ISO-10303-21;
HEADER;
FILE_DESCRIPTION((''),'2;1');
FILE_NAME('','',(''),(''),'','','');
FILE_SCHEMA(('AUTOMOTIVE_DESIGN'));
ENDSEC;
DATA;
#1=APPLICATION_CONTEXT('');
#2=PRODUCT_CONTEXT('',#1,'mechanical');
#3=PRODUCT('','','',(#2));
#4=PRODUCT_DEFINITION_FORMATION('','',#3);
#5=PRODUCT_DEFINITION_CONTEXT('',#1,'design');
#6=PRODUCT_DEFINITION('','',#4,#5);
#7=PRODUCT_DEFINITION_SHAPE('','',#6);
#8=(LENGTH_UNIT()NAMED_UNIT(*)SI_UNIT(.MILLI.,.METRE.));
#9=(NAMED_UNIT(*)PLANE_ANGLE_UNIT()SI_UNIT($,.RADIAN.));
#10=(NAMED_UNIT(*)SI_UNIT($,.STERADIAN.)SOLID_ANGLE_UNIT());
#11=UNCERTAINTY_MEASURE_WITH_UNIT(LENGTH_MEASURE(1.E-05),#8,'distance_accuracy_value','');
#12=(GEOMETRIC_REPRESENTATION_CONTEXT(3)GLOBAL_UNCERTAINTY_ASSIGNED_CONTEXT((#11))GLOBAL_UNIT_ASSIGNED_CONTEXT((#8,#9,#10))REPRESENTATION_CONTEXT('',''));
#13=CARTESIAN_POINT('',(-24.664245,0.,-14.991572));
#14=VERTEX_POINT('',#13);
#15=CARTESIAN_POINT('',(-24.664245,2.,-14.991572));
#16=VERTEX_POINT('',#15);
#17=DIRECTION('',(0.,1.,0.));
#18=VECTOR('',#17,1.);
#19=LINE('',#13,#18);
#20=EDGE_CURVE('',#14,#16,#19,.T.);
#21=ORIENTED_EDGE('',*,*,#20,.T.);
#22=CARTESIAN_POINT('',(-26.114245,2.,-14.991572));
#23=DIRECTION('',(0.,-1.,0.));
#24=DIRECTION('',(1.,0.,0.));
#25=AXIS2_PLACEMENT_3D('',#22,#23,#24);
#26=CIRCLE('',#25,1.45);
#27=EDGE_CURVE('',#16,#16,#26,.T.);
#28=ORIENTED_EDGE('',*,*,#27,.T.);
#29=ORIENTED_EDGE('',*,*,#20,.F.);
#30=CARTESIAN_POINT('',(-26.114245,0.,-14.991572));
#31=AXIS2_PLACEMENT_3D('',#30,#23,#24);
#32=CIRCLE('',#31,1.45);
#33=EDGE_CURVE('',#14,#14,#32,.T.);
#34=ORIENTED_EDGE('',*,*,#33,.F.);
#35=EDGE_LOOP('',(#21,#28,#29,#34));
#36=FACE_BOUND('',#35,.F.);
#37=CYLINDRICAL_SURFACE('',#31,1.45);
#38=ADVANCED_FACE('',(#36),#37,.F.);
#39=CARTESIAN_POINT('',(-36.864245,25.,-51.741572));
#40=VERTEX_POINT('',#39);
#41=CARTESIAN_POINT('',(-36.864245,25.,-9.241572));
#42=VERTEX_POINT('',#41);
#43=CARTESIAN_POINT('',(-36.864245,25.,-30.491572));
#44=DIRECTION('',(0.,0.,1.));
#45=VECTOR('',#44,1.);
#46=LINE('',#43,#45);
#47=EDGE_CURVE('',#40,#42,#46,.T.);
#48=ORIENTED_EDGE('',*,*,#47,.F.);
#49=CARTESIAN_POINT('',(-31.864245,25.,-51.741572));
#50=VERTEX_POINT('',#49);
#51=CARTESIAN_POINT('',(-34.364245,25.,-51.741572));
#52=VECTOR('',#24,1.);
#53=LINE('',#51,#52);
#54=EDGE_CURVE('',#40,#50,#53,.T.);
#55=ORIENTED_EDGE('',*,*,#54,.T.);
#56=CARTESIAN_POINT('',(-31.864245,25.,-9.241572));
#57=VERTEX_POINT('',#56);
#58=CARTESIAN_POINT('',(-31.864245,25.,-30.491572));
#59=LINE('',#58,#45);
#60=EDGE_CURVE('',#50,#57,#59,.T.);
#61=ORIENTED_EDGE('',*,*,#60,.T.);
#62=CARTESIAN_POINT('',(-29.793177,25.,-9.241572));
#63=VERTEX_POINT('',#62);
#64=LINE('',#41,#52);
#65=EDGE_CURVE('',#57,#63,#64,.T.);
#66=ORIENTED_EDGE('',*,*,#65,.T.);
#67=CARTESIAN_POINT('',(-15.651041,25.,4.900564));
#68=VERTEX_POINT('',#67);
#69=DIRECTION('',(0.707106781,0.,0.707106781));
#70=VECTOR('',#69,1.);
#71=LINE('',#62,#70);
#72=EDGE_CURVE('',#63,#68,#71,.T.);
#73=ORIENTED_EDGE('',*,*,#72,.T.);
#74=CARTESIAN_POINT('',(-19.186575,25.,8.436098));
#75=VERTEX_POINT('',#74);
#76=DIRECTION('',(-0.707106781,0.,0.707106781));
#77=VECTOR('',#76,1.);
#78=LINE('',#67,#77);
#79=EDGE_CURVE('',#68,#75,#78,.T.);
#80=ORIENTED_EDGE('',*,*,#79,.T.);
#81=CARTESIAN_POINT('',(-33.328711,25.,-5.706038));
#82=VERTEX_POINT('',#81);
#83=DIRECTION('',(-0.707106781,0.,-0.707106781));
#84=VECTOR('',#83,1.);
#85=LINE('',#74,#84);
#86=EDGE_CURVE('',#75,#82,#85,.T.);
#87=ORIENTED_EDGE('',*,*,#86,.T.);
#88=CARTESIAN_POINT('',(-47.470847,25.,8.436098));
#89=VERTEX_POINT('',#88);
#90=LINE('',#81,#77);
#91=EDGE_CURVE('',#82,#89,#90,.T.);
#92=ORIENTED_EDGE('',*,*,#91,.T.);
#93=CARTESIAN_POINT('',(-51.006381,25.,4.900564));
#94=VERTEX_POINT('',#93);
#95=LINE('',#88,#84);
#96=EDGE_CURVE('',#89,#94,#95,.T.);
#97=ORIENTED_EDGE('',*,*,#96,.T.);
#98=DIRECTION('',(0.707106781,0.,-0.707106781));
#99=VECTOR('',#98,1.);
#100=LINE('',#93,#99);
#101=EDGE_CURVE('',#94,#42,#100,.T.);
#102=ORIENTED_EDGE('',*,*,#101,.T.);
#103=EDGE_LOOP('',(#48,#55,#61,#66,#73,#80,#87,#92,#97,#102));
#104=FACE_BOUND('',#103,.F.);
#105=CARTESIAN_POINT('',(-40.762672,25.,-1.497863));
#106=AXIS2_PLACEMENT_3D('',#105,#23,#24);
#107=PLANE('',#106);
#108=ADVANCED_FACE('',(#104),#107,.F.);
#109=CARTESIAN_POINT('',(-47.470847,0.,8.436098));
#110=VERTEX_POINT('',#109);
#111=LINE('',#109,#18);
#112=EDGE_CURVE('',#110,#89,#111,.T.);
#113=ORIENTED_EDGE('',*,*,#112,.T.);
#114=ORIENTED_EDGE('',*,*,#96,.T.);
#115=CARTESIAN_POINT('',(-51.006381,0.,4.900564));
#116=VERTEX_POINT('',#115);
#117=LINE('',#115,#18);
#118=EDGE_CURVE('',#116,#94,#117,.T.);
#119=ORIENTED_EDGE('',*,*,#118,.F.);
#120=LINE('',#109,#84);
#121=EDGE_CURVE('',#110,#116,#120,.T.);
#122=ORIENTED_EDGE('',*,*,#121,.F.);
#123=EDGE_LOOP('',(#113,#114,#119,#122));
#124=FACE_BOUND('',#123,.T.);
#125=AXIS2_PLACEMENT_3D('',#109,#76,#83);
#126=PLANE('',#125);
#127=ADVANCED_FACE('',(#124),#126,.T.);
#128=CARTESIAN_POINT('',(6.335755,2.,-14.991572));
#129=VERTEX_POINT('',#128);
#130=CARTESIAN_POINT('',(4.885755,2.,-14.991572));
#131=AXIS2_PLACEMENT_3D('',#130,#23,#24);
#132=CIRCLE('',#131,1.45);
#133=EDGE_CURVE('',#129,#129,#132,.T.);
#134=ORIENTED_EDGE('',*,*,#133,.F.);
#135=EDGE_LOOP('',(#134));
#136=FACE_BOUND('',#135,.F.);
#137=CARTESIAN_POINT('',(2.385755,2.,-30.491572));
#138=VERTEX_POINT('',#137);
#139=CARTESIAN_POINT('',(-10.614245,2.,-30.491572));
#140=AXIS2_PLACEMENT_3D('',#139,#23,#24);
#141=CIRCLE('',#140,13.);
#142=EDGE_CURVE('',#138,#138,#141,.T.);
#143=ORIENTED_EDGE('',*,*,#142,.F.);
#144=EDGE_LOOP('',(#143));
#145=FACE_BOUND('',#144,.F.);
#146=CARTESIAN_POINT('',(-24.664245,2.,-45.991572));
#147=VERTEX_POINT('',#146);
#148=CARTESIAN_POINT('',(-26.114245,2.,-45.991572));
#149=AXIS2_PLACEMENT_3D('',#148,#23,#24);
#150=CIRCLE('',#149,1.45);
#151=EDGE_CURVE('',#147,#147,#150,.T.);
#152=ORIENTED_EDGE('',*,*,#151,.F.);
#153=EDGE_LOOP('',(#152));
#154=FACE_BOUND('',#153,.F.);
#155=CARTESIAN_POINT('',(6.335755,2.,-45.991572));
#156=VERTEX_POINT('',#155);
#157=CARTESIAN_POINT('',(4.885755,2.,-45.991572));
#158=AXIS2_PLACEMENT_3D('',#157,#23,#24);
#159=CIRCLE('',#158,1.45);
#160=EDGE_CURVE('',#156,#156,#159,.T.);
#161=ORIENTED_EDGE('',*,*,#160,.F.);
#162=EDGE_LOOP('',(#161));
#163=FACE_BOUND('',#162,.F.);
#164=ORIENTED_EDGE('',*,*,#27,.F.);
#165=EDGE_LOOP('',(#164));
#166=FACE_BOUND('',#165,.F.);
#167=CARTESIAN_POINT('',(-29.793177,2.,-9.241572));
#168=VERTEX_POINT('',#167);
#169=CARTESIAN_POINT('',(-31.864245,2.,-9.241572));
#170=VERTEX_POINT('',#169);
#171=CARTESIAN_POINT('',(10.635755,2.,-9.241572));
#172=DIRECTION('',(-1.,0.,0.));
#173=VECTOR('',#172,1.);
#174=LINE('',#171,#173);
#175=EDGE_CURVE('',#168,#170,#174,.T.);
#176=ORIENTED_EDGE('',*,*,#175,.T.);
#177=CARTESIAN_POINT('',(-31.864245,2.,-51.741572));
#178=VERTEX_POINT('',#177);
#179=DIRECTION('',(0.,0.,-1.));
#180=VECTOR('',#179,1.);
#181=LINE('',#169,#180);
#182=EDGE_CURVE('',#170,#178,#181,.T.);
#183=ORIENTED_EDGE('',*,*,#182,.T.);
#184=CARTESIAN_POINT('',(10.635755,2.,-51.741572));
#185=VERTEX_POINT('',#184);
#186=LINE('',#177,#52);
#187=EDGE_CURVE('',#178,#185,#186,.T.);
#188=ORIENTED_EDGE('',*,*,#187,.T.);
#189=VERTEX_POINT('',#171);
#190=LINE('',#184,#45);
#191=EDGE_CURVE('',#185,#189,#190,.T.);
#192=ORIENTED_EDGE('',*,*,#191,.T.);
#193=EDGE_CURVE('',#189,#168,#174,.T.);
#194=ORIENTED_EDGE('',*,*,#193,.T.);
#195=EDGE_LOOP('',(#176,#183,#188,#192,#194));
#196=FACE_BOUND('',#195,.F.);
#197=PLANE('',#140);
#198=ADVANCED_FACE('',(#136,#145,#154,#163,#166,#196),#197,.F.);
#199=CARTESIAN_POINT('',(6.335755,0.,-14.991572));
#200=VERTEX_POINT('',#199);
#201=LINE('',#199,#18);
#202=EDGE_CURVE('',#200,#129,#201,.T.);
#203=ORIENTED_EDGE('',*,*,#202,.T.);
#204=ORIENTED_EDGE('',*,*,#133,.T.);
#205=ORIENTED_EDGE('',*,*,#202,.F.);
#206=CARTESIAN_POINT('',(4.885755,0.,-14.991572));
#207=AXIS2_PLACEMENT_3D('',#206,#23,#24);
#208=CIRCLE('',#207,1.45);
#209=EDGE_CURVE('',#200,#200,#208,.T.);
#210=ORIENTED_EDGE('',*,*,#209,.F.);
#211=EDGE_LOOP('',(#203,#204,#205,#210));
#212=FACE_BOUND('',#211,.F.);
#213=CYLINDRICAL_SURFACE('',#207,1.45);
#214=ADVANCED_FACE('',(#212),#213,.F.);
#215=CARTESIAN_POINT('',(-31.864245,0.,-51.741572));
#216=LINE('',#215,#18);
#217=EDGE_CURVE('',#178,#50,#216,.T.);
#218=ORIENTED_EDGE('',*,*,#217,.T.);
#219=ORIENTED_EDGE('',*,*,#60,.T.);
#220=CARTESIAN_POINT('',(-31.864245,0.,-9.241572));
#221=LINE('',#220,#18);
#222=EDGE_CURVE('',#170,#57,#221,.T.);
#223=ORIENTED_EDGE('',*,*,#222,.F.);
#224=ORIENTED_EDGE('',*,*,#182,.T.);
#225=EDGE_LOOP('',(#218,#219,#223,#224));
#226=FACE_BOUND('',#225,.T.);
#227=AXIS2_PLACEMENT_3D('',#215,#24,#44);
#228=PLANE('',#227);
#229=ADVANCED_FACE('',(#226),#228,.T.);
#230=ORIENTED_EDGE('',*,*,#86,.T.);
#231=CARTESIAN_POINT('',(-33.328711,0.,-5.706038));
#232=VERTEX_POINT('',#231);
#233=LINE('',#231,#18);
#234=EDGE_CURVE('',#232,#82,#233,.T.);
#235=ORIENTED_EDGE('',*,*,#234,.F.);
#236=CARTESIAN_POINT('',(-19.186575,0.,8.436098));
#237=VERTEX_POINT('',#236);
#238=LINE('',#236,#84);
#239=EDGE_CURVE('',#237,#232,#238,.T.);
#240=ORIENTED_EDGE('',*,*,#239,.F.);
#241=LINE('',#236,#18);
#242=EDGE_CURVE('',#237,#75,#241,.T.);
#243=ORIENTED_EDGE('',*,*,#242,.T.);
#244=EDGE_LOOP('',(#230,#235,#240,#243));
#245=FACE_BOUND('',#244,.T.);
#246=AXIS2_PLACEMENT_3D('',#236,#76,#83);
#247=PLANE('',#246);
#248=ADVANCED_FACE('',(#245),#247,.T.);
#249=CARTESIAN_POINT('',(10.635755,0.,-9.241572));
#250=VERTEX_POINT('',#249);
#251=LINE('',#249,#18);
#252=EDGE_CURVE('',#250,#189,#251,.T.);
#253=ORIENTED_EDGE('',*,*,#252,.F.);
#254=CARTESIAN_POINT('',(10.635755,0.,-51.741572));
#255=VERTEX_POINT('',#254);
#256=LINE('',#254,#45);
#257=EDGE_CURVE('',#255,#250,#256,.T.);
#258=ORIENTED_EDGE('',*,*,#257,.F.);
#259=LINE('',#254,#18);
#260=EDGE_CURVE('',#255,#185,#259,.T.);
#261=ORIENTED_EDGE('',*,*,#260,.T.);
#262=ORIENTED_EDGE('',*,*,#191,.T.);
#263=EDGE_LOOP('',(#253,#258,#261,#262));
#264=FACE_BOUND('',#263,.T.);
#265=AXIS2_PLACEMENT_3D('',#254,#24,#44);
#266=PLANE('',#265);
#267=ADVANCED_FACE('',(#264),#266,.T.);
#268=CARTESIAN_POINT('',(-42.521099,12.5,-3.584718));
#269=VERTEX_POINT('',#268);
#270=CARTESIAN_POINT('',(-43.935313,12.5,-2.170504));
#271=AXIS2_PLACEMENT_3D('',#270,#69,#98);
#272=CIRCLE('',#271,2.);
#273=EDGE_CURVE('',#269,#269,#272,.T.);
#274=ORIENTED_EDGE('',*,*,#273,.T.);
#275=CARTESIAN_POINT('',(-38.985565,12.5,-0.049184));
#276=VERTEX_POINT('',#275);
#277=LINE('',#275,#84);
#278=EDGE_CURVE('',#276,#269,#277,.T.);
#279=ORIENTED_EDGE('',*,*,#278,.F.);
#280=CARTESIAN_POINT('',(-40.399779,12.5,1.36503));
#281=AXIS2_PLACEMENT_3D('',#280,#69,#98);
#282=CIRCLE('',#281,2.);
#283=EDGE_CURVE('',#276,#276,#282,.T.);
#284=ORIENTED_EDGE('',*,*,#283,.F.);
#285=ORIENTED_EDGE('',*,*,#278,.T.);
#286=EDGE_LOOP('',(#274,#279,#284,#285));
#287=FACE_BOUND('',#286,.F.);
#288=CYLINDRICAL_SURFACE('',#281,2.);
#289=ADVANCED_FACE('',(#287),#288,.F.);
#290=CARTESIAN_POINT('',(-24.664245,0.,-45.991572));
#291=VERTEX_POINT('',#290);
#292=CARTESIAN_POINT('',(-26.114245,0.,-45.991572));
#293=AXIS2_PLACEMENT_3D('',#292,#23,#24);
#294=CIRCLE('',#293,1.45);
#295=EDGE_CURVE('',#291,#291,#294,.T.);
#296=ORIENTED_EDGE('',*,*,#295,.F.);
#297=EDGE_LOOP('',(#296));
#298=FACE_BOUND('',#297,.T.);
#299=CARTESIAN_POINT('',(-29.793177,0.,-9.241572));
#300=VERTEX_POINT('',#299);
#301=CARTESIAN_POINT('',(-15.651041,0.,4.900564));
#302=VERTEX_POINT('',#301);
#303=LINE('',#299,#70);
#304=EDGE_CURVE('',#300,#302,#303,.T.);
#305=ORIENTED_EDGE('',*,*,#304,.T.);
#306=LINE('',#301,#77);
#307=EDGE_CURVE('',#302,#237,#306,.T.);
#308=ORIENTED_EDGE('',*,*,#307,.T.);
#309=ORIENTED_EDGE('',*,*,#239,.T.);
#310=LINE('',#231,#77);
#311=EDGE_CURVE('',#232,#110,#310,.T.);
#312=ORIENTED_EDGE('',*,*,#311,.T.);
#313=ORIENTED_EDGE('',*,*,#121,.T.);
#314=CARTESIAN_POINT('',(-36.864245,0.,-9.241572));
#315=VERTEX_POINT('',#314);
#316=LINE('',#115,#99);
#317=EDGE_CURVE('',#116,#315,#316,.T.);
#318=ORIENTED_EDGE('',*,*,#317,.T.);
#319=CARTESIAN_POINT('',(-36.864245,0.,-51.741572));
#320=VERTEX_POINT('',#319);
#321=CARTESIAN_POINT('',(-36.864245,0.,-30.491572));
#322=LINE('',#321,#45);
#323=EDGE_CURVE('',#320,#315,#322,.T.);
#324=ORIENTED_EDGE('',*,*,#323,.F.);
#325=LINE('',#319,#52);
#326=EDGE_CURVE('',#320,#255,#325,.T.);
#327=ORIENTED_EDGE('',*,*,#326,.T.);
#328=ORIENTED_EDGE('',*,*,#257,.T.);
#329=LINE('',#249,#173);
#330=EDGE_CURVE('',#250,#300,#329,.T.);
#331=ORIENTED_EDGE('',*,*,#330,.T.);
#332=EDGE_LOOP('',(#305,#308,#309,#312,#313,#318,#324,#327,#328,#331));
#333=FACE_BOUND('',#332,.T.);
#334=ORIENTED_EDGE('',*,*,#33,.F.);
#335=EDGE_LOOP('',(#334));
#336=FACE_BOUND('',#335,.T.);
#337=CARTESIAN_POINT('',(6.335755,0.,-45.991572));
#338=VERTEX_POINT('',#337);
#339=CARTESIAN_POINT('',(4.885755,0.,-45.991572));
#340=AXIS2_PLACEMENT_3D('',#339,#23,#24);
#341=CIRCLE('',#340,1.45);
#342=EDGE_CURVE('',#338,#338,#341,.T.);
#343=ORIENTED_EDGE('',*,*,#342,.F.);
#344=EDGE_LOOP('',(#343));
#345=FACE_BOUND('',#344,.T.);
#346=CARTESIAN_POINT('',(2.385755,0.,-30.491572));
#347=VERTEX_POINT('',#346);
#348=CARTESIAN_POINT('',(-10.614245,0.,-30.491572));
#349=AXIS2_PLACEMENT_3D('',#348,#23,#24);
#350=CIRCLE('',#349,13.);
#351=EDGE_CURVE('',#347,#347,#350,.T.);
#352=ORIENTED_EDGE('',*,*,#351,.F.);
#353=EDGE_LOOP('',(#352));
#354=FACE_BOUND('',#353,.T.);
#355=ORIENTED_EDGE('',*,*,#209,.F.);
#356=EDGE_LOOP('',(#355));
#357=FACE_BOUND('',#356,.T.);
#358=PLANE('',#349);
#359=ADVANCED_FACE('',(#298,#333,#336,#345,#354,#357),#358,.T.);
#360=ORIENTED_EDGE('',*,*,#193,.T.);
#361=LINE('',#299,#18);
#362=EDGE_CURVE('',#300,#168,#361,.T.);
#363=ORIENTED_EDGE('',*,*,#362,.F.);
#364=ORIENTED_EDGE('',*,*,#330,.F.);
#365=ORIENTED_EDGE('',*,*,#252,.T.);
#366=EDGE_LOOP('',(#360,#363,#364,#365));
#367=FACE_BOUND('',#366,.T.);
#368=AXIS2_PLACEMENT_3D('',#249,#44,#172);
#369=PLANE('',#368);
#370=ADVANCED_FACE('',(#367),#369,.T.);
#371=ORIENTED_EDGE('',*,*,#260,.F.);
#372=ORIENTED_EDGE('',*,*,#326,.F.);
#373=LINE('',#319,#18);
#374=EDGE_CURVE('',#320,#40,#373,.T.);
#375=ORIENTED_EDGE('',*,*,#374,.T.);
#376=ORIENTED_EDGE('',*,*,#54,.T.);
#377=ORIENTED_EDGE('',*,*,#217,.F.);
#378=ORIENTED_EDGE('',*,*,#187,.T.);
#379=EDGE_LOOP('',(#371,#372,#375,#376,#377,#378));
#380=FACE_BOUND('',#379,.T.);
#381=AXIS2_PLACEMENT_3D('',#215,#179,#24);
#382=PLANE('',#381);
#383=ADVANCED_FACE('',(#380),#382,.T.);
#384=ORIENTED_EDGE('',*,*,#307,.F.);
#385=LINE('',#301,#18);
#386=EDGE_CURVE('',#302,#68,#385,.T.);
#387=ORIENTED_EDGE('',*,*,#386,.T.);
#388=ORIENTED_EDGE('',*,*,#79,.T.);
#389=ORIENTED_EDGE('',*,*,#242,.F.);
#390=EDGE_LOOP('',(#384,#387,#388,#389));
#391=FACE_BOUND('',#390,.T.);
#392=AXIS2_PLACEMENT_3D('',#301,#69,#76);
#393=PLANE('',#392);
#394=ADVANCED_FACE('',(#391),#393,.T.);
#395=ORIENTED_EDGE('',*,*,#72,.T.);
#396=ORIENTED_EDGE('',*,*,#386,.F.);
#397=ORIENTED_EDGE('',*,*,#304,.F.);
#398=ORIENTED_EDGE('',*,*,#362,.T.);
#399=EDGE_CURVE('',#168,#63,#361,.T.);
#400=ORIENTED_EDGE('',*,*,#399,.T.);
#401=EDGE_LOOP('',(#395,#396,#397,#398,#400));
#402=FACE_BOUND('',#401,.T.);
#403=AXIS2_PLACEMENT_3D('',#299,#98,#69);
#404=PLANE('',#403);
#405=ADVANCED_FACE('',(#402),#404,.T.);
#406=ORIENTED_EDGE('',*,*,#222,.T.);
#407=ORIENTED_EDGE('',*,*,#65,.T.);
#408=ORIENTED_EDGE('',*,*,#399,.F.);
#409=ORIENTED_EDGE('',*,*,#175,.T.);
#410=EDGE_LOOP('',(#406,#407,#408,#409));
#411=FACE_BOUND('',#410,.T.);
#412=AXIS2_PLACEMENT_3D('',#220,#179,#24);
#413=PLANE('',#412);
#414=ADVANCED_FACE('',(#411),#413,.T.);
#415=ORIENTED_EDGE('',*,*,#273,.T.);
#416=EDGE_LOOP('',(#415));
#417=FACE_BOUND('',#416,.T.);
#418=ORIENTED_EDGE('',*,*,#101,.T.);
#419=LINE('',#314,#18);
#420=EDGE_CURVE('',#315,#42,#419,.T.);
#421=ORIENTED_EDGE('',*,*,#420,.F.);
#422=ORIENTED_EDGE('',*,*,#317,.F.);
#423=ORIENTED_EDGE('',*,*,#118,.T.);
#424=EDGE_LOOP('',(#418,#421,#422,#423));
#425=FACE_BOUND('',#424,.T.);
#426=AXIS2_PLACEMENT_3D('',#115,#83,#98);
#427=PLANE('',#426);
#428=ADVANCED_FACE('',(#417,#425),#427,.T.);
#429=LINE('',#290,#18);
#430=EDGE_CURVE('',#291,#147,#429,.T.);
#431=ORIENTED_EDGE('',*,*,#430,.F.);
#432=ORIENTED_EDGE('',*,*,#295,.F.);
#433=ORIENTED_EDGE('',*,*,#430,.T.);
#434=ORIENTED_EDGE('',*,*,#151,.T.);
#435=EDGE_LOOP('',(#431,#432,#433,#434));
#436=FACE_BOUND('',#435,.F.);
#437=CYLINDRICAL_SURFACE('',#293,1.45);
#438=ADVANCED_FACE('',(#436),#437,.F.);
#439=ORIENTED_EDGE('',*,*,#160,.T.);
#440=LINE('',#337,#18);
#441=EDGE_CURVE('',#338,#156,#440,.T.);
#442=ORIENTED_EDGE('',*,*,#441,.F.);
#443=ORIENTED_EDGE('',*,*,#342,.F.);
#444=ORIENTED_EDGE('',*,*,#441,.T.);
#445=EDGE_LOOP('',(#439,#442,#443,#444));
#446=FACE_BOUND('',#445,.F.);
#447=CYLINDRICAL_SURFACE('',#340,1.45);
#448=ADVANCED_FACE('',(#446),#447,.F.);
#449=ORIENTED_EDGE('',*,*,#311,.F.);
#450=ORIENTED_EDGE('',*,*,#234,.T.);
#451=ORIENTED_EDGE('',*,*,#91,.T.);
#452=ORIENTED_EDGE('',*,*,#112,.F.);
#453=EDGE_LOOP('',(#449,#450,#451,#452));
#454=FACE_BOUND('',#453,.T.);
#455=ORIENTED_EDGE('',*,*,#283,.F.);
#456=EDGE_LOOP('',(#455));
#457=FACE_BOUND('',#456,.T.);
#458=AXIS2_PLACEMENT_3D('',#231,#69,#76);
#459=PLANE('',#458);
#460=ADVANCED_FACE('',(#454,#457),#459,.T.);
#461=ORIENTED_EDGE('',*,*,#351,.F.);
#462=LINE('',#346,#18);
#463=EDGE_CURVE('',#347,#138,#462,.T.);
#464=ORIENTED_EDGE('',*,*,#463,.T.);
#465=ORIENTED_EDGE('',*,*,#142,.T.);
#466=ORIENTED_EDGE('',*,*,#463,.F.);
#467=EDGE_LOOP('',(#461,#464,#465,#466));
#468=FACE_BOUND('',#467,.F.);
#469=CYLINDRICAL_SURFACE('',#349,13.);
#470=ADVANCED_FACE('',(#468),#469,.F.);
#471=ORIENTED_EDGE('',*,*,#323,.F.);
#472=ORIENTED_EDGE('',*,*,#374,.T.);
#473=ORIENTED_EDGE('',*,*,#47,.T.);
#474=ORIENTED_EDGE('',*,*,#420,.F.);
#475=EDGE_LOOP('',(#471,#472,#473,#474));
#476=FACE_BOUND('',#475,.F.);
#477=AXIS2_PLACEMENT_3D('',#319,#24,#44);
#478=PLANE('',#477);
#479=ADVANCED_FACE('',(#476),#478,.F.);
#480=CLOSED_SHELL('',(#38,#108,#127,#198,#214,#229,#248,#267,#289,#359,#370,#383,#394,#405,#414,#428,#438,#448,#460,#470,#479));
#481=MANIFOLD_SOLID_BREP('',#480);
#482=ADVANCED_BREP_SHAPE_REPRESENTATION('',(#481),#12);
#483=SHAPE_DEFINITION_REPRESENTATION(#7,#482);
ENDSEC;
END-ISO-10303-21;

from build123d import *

# Parameters (mm, degrees)
F0_W     = 5
F0_H     = 42.5
F1_DEPTH = 25
F0_R     = 1.45
F0_R_2   = 13
F2_DEPTH = 2
F3_R     = 2
F4_DEPTH = 25


# Not quite as in the source:
# - a feature names something its author has since deleted; it is built from what else it names


with BuildPart() as f1:
    # F0 (on Front) → F1 (new body)
    with BuildSketch(Plane.XZ):
        Polygon((-51.006380532, 4.9005637974), (-36.8642449083, -9.2415718264), (-31.8642449083, -9.2415718264), (-29.7931770964, -9.2415718264), (-33.3287110023, -5.7060379204), (-47.4708466261, 8.4360977033), align=None)
        with Locations((-34.3642449083, -30.4915718264)):
            Rectangle(F0_W, F0_H)
        Polygon((-33.3287110023, -5.7060379204), (-29.7931770964, -9.2415718264), (-15.6510414727, 4.9005637974), (-19.1865753786, 8.4360977033), align=None)
    extrude(amount=-F1_DEPTH)

    # F0 (on Front) → F2 (join)
    with BuildSketch(Plane.XZ):
        Polygon((-29.7931770964, -9.2415718264), (-31.8642449083, -9.2415718264), (-31.8642449083, -51.7415718264), (10.6357550917, -51.7415718264), (10.6357550917, -9.2415718264), align=None)
        with Locations((-26.1142449083, -45.9915718264)):
            Circle(F0_R, mode=Mode.SUBTRACT)
        with Locations((4.8857550917, -45.9915718264)):
            Circle(F0_R, mode=Mode.SUBTRACT)
        with Locations((-10.6142449083, -30.4915718264)):
            Circle(F0_R_2, mode=Mode.SUBTRACT)
        with Locations((-26.1142449083, -14.9915718264)):
            Circle(F0_R, mode=Mode.SUBTRACT)
        with Locations((4.8857550917, -14.9915718264)):
            Circle(F0_R, mode=Mode.SUBTRACT)
    extrude(amount=-F2_DEPTH)

    # F3 (on face) → F4 (cut)
    with BuildSketch(Plane(origin=(-19.5173744614, 0, -19.5173744614), x_dir=(0.7071067812, 0, -0.7071067812), z_dir=(0.7071067812, 0, 0.7071067812))):
        with Locations((-29.5321794507, 12.5)):
            Circle(F3_R)
    extrude(amount=-F4_DEPTH, mode=Mode.SUBTRACT)


solid = f1.part
